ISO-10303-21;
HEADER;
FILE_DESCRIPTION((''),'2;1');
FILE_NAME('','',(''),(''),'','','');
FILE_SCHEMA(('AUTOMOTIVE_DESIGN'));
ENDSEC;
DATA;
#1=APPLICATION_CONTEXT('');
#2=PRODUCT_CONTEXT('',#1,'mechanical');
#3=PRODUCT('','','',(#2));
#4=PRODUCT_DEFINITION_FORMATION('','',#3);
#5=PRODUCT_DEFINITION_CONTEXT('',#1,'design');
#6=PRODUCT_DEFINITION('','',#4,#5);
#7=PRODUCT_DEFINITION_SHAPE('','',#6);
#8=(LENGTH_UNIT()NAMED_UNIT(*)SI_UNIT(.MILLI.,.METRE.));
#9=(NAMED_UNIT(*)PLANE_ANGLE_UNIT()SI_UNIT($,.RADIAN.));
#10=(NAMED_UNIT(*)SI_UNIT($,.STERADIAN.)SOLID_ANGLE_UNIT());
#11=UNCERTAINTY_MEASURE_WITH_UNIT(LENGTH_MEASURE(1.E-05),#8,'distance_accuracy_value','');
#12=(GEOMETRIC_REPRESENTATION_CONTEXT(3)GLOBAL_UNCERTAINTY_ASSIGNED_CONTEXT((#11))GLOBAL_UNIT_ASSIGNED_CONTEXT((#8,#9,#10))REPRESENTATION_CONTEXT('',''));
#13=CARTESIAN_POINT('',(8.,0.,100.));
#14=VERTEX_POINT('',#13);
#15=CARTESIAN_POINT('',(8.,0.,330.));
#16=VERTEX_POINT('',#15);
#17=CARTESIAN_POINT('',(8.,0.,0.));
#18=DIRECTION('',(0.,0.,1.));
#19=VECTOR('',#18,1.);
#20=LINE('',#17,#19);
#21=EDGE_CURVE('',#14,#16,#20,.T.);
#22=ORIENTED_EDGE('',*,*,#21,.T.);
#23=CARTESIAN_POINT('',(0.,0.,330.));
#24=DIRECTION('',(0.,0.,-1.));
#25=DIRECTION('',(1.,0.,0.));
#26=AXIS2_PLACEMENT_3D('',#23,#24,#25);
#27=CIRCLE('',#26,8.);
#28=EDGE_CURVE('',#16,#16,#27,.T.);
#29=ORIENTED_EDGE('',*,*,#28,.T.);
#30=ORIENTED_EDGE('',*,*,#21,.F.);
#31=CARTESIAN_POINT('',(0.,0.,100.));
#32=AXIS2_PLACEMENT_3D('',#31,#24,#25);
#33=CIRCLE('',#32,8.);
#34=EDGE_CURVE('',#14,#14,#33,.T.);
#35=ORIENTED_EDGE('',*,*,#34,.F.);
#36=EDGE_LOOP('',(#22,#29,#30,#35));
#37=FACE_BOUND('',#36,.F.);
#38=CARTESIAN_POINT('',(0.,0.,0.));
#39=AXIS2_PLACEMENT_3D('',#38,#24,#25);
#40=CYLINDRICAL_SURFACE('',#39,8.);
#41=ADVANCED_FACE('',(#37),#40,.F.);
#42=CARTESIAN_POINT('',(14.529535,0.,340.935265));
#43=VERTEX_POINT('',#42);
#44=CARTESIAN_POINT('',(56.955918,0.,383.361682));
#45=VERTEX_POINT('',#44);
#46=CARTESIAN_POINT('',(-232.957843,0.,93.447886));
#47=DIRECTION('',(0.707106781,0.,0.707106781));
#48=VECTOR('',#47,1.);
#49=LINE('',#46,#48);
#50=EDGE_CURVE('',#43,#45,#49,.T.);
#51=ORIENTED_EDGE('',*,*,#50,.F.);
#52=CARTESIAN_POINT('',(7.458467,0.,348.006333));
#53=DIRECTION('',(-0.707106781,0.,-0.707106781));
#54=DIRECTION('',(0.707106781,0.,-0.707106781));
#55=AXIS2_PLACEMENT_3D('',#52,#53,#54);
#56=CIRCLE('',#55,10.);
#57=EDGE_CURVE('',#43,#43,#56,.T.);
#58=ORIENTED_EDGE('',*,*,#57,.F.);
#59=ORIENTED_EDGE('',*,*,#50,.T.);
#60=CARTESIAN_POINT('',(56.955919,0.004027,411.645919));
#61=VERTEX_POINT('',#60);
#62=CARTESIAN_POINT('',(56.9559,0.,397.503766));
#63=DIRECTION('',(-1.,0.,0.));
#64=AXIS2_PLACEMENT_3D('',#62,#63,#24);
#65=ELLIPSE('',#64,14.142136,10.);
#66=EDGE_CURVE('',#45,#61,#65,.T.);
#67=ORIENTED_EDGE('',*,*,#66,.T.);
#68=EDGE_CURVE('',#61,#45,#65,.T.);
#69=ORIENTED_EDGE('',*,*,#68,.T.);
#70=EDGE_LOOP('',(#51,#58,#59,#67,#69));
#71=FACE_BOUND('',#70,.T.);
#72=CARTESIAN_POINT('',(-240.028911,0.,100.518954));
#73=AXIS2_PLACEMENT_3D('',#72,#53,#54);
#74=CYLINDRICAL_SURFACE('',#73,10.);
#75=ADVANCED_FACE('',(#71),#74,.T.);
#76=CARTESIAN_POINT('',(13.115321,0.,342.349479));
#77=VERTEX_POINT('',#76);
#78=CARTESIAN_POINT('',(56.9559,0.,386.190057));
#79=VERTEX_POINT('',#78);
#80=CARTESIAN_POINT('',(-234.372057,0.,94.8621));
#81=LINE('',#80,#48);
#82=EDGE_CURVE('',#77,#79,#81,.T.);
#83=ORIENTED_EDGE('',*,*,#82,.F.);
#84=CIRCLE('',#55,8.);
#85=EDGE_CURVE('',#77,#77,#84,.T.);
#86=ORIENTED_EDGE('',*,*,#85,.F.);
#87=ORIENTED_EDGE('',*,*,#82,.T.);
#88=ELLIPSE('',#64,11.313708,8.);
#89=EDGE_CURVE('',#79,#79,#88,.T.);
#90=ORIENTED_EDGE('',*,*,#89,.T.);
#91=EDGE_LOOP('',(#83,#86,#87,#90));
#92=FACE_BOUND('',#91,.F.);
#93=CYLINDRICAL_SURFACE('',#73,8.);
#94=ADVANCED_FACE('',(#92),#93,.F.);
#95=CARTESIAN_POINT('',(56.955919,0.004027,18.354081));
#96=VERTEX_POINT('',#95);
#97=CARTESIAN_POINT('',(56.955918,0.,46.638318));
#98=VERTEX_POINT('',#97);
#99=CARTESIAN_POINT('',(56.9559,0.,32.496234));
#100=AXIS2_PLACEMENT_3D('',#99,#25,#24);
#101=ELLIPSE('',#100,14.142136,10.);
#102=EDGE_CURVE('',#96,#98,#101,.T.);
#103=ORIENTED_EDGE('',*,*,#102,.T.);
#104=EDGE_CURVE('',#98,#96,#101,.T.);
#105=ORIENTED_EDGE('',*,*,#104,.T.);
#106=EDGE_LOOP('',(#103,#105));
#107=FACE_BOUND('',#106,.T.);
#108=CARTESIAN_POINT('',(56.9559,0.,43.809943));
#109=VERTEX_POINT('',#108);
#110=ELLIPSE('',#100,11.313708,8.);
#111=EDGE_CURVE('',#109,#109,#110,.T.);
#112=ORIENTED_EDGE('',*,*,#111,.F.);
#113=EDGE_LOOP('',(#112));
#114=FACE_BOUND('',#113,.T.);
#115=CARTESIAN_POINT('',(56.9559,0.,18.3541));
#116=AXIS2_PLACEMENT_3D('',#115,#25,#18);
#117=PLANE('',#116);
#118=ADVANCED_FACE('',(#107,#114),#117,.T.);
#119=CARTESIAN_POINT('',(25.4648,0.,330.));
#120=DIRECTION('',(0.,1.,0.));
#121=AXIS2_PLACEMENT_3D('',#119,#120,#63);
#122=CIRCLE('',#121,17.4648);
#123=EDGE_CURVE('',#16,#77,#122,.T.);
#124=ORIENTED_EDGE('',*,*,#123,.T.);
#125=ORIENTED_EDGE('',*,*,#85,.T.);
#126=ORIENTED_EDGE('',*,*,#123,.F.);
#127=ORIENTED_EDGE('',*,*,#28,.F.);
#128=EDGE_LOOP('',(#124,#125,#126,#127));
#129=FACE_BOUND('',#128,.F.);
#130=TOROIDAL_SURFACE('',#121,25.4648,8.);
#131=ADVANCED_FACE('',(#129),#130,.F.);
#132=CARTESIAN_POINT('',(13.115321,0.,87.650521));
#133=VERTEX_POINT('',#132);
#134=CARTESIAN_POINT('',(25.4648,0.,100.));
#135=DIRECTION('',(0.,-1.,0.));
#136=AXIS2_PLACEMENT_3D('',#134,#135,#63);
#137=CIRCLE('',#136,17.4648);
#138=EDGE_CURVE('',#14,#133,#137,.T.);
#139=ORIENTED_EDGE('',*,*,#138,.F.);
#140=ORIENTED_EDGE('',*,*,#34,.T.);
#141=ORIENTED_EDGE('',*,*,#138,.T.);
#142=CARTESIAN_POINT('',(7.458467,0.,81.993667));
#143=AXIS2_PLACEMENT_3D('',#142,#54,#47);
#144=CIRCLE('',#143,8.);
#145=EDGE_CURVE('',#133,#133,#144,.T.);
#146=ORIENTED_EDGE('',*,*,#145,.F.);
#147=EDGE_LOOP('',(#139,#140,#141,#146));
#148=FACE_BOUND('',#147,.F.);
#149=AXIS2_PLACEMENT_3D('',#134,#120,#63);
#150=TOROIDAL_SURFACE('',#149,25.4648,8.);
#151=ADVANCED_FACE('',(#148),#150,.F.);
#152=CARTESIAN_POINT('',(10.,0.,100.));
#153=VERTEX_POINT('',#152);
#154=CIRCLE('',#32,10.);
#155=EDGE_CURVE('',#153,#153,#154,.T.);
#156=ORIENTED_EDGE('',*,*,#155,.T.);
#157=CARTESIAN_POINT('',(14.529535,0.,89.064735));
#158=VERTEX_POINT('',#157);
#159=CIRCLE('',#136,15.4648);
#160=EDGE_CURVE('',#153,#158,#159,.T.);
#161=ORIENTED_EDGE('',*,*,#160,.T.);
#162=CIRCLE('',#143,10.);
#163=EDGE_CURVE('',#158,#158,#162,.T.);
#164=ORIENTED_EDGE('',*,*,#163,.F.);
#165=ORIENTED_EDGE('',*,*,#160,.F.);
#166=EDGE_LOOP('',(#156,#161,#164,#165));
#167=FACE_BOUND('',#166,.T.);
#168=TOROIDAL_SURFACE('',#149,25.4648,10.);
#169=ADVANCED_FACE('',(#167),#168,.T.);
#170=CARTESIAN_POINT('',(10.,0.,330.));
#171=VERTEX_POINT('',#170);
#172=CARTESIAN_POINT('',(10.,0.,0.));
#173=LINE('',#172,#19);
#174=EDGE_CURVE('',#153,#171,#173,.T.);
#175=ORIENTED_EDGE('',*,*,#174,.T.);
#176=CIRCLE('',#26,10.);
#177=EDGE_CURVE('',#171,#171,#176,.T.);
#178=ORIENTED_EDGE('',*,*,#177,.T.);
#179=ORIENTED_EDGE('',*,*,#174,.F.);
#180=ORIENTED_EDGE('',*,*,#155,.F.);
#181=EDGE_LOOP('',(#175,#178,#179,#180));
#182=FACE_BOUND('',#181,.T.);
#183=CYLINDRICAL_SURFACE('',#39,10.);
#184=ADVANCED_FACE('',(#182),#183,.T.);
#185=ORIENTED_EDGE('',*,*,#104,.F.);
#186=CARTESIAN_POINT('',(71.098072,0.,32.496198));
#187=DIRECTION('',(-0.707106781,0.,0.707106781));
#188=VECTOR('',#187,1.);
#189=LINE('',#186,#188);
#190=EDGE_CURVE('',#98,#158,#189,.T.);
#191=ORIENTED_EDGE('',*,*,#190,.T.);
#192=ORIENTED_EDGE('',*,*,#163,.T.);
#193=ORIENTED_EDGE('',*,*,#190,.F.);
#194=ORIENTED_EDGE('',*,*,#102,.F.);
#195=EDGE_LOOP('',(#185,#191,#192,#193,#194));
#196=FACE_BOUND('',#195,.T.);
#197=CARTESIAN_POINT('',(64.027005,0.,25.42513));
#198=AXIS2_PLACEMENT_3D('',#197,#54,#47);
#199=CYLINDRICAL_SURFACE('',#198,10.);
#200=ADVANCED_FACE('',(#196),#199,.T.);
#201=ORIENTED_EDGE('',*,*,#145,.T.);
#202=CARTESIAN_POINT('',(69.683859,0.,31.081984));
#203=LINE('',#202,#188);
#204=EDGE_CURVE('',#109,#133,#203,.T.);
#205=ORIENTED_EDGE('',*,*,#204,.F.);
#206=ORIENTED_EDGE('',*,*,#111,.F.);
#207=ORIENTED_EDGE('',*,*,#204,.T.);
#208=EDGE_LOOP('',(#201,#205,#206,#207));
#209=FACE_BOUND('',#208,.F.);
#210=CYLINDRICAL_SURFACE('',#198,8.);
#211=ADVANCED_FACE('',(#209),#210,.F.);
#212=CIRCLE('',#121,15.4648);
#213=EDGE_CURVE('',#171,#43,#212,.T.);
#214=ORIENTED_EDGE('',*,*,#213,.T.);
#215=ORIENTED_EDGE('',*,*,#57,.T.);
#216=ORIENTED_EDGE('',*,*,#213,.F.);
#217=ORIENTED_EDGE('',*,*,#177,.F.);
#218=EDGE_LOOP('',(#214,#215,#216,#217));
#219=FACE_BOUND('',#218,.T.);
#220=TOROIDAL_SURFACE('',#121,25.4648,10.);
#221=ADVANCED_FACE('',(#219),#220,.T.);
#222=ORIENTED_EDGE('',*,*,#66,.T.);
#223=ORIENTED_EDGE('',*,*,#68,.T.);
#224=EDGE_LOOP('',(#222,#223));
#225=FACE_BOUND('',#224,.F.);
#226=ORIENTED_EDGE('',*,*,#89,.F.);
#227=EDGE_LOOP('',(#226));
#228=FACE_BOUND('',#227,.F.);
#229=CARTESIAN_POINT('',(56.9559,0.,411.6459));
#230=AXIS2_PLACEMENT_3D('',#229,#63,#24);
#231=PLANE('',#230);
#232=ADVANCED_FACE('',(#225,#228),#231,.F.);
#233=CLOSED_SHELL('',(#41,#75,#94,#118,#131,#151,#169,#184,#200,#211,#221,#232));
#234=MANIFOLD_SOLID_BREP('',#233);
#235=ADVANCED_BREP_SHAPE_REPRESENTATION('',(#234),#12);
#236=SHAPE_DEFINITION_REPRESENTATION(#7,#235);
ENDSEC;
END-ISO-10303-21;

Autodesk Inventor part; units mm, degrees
ref_plane "YZ Plane" through (0, 0, 0) normal (1, 0, 0) x (0, 1, 0)
ref_plane "XZ Plane" through (0, 0, 0) normal (0, 1, 0) x (-1, 0, 0)
ref_plane "XY Plane" through (0, 0, 0) normal (0, 0, 1) x (1, 0, 0)
sketch "Szkic1" plane through (0, 0, 0) normal (0, 0, 1) x (1, 0, 0)
  circle A0 centre (0, 0) radius 10
  dimension "d0" = 20
extrude "Wyciągnięcie proste1" add sketch "Szkic1" along normal blind 430
shell "Skorupa1" thickness 2 removed faces 2 at (-1.182, 3.1167, 430) at (-1.182, 3.1167, 0)
sketch "Szkic2" plane through (0, 0, 0) normal (1, 0, 0) x (0, 1, 0)
  line L0 (-34.5081, 100) -> (42.8278, 100)
  line L1 (-10, 0) -> (10, 0) projected
  line L2 (10, 430) -> (-10, 430) projected
  point P0 (0, 0)
  dimension "d4" = 100
bend part "Gięcie części1" radius 25.4648 angle 45 line through (0, -34.5081, 100) along (0, 1, 0) centre toward (1, 0, 0) moving side (0, 0, -1) both sides no
sketch "Szkic3" plane through (0, 0, 0) normal (1, 0, 0) x (0, 1, 0)
  line L0 (-35.2697, 330) -> (39.6293, 330)
  line L1 (10, 430) -> (-10, 430) projected
  point P0 (0, 0)
  dimension "d8" = 100
bend part "Gięcie części2" radius 25.4648 angle 45 line through (0, -35.2697, 330) along (0, 1, 0) centre toward (1, 0, 0) moving side (0, 0, 1) both sides no
sketch "Szkic4" plane through (0, 0, 0) normal (0, 1, 0) x (-1, 0, 0)
  line L0 (-71.0981, 32.4962) -> (-56.9559, 18.3541) construction
  line L1 (-56.9559, 18.3541) -> (-0.3874, 74.9226) construction
  line L2 (-56.9559, 18.3541) -> (-56.9559, 46.6383)
  line L3 (-71.0981, 32.4962) -> (-14.5295, 89.0647) construction
  line L4 (-56.9559, 46.6383) -> (-71.0981, 32.4962)
  line L5 (-71.0981, 32.4962) -> (-56.9559, 18.3541)
  line L6 (-56.9559, 411.6459) -> (-71.0981, 397.5038) construction
  line L7 (-14.5295, 340.9353) -> (-71.0981, 397.5038) construction
  line L8 (-0.3874, 355.0774) -> (-56.9559, 411.6459) construction
  line L9 (-56.9559, 411.6459) -> (-56.9559, 383.3617)
  line L10 (-56.9559, 383.3617) -> (-71.0981, 397.5038)
  line L11 (-71.0981, 397.5038) -> (-56.9559, 411.6459)
  point P0 (0, 0)
extrude "Wyciągnięcie proste3" cut sketch "Szkic4" along normal mid plane 32
equation "\"PromieńGięcia\" = Grubość"
equation "\"SzerokośćGięciaPodcięcia\" = Grubość"
equation "\"GłębokośćGięciaPodcięcia\" = 0.5 * Grubość"
equation "\"RozmiarPodcięciaNarożnika\" = 4 * Grubość"
equation "\"MinimalnaPozostałość\" = 2 * Grubość"
equation "\"PromieńPrzejścia\" = PromieńGięcia"
equation "\"Rozmiar_promienia_Jacobiego\" = Grubość"
equation "\"Wielk_odstępu\" = Grubość"
equation "\"Grubość\" = 0.5"
properties part number "Rura_poprzeczna_wygieta" material "Aluminium AW-7020"
